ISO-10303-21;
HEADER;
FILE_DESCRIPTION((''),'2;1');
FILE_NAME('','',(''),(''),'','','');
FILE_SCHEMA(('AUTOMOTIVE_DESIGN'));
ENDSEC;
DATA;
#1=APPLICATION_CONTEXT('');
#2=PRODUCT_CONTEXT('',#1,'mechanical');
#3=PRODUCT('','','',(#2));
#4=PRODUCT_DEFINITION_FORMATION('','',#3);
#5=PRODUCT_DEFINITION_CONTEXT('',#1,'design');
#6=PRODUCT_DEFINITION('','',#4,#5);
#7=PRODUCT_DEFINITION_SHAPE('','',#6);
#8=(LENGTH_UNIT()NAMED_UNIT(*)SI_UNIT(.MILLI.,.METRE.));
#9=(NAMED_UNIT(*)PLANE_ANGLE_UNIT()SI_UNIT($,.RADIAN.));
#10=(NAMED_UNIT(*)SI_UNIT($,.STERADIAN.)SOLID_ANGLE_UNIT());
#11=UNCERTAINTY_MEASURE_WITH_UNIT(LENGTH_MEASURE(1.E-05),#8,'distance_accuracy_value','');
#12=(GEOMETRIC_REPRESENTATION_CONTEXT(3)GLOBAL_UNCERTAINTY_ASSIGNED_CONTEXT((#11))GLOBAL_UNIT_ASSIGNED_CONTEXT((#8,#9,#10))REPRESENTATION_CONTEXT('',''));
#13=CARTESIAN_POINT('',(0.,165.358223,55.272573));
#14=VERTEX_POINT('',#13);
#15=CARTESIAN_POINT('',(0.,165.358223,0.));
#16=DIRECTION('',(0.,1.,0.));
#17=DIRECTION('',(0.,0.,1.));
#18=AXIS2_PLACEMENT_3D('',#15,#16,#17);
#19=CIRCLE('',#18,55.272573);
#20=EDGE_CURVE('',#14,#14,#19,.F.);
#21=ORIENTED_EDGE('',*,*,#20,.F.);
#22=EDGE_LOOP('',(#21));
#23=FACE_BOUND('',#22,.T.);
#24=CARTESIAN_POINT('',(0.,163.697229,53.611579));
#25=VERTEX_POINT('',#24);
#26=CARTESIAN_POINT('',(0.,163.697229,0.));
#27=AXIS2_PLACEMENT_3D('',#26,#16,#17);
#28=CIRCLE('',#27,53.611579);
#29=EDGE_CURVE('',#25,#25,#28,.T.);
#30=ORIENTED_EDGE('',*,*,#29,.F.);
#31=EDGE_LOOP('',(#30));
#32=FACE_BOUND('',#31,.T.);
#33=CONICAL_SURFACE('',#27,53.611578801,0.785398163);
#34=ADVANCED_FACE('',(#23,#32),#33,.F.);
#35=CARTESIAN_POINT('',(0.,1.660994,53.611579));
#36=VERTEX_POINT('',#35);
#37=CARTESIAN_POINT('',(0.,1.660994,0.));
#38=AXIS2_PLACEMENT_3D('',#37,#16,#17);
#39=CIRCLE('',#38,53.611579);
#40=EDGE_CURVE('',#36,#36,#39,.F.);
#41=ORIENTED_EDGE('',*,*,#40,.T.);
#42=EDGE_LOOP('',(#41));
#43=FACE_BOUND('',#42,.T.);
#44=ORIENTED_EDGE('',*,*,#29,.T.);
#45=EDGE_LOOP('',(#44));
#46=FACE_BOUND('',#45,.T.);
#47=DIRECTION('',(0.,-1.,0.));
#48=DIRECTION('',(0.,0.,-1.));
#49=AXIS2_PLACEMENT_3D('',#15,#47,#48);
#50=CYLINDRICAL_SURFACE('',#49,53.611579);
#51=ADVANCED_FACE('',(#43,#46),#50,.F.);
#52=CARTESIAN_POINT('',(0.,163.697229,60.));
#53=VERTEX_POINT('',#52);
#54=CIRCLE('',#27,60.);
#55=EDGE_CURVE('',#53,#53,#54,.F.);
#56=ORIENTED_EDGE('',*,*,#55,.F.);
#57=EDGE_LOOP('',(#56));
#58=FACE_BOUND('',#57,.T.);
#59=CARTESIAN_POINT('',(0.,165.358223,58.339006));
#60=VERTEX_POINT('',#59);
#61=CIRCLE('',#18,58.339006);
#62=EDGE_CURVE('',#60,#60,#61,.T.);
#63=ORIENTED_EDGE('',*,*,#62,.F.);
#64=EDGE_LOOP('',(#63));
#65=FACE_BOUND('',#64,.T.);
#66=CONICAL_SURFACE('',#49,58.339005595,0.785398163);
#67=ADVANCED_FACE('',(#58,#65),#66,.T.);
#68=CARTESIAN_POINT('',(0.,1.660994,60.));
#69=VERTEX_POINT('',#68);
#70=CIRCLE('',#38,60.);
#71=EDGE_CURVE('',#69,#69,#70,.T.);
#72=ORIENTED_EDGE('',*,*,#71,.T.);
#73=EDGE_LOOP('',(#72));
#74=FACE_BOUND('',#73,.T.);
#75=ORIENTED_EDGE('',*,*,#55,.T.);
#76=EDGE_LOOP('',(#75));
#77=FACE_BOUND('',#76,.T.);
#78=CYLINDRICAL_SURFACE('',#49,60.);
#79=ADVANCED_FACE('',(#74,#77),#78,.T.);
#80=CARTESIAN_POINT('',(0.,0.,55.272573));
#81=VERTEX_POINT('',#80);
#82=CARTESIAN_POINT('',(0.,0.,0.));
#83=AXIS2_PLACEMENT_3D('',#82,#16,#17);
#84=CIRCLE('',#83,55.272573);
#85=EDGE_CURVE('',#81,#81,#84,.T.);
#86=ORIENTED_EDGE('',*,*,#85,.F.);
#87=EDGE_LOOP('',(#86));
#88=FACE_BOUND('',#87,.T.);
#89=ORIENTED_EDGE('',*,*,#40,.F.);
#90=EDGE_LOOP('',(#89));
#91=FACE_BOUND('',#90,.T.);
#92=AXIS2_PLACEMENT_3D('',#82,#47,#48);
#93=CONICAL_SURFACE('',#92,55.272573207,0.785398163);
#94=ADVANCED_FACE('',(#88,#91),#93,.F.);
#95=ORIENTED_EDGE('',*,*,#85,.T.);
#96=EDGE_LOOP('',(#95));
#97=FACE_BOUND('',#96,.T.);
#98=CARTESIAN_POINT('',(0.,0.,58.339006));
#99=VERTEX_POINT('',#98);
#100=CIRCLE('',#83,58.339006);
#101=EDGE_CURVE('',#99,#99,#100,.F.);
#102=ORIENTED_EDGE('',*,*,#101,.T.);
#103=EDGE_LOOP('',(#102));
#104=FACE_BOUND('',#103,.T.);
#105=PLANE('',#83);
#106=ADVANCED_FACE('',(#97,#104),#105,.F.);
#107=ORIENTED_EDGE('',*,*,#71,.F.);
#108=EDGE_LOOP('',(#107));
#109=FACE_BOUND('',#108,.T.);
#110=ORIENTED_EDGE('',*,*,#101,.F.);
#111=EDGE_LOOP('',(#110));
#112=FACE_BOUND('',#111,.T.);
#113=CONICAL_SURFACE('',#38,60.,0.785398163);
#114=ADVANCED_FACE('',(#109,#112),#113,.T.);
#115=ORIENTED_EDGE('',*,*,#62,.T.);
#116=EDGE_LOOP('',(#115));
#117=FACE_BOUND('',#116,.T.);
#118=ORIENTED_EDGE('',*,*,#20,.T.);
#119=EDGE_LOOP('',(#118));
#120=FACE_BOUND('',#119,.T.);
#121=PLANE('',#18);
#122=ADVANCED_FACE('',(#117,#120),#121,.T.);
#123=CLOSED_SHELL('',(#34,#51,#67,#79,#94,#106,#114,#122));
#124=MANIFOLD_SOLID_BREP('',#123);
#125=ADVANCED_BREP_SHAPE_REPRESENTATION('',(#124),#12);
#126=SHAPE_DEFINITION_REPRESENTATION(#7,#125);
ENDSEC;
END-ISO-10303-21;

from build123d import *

# Parameters (mm, degrees)
SKETCH1_R           = 60
BOSS_EXTRUDE1_DEPTH = 165.358222998
SKETCH2_R           = 53.611578801
CUT_EXTRUDE1_DEPTH  = 186.858392098
CHAMFER1_SIZE       = 1.660994405


with BuildPart() as part:
    # Sketch1 → Boss-Extrude1 (new body)
    with BuildSketch(Plane(origin=(0, 0, 0), x_dir=(1, 0, 0), z_dir=(0, 1, 0))):
        Circle(SKETCH1_R)
    extrude(amount=BOSS_EXTRUDE1_DEPTH)

    # Sketch2 → Cut-Extrude1 (cut, through all)
    with BuildSketch(Plane(origin=(0, 0, 0), x_dir=(1, 0, 0), z_dir=(0, 1, 0))):
        Circle(SKETCH2_R)
    extrude(amount=CUT_EXTRUDE1_DEPTH, mode=Mode.SUBTRACT)

    # Chamfer1
    chamfer1_edges = [part.edges().sort_by_distance(p)[0] for p in [
        (-53.611578801, 165.358222998, 0),
        (-53.611578801, 0, 0),
        (-60, 0, 0),
        (-60, 165.358222998, 0),
    ]]
    chamfer(chamfer1_edges, length=CHAMFER1_SIZE)


solid = part.part
